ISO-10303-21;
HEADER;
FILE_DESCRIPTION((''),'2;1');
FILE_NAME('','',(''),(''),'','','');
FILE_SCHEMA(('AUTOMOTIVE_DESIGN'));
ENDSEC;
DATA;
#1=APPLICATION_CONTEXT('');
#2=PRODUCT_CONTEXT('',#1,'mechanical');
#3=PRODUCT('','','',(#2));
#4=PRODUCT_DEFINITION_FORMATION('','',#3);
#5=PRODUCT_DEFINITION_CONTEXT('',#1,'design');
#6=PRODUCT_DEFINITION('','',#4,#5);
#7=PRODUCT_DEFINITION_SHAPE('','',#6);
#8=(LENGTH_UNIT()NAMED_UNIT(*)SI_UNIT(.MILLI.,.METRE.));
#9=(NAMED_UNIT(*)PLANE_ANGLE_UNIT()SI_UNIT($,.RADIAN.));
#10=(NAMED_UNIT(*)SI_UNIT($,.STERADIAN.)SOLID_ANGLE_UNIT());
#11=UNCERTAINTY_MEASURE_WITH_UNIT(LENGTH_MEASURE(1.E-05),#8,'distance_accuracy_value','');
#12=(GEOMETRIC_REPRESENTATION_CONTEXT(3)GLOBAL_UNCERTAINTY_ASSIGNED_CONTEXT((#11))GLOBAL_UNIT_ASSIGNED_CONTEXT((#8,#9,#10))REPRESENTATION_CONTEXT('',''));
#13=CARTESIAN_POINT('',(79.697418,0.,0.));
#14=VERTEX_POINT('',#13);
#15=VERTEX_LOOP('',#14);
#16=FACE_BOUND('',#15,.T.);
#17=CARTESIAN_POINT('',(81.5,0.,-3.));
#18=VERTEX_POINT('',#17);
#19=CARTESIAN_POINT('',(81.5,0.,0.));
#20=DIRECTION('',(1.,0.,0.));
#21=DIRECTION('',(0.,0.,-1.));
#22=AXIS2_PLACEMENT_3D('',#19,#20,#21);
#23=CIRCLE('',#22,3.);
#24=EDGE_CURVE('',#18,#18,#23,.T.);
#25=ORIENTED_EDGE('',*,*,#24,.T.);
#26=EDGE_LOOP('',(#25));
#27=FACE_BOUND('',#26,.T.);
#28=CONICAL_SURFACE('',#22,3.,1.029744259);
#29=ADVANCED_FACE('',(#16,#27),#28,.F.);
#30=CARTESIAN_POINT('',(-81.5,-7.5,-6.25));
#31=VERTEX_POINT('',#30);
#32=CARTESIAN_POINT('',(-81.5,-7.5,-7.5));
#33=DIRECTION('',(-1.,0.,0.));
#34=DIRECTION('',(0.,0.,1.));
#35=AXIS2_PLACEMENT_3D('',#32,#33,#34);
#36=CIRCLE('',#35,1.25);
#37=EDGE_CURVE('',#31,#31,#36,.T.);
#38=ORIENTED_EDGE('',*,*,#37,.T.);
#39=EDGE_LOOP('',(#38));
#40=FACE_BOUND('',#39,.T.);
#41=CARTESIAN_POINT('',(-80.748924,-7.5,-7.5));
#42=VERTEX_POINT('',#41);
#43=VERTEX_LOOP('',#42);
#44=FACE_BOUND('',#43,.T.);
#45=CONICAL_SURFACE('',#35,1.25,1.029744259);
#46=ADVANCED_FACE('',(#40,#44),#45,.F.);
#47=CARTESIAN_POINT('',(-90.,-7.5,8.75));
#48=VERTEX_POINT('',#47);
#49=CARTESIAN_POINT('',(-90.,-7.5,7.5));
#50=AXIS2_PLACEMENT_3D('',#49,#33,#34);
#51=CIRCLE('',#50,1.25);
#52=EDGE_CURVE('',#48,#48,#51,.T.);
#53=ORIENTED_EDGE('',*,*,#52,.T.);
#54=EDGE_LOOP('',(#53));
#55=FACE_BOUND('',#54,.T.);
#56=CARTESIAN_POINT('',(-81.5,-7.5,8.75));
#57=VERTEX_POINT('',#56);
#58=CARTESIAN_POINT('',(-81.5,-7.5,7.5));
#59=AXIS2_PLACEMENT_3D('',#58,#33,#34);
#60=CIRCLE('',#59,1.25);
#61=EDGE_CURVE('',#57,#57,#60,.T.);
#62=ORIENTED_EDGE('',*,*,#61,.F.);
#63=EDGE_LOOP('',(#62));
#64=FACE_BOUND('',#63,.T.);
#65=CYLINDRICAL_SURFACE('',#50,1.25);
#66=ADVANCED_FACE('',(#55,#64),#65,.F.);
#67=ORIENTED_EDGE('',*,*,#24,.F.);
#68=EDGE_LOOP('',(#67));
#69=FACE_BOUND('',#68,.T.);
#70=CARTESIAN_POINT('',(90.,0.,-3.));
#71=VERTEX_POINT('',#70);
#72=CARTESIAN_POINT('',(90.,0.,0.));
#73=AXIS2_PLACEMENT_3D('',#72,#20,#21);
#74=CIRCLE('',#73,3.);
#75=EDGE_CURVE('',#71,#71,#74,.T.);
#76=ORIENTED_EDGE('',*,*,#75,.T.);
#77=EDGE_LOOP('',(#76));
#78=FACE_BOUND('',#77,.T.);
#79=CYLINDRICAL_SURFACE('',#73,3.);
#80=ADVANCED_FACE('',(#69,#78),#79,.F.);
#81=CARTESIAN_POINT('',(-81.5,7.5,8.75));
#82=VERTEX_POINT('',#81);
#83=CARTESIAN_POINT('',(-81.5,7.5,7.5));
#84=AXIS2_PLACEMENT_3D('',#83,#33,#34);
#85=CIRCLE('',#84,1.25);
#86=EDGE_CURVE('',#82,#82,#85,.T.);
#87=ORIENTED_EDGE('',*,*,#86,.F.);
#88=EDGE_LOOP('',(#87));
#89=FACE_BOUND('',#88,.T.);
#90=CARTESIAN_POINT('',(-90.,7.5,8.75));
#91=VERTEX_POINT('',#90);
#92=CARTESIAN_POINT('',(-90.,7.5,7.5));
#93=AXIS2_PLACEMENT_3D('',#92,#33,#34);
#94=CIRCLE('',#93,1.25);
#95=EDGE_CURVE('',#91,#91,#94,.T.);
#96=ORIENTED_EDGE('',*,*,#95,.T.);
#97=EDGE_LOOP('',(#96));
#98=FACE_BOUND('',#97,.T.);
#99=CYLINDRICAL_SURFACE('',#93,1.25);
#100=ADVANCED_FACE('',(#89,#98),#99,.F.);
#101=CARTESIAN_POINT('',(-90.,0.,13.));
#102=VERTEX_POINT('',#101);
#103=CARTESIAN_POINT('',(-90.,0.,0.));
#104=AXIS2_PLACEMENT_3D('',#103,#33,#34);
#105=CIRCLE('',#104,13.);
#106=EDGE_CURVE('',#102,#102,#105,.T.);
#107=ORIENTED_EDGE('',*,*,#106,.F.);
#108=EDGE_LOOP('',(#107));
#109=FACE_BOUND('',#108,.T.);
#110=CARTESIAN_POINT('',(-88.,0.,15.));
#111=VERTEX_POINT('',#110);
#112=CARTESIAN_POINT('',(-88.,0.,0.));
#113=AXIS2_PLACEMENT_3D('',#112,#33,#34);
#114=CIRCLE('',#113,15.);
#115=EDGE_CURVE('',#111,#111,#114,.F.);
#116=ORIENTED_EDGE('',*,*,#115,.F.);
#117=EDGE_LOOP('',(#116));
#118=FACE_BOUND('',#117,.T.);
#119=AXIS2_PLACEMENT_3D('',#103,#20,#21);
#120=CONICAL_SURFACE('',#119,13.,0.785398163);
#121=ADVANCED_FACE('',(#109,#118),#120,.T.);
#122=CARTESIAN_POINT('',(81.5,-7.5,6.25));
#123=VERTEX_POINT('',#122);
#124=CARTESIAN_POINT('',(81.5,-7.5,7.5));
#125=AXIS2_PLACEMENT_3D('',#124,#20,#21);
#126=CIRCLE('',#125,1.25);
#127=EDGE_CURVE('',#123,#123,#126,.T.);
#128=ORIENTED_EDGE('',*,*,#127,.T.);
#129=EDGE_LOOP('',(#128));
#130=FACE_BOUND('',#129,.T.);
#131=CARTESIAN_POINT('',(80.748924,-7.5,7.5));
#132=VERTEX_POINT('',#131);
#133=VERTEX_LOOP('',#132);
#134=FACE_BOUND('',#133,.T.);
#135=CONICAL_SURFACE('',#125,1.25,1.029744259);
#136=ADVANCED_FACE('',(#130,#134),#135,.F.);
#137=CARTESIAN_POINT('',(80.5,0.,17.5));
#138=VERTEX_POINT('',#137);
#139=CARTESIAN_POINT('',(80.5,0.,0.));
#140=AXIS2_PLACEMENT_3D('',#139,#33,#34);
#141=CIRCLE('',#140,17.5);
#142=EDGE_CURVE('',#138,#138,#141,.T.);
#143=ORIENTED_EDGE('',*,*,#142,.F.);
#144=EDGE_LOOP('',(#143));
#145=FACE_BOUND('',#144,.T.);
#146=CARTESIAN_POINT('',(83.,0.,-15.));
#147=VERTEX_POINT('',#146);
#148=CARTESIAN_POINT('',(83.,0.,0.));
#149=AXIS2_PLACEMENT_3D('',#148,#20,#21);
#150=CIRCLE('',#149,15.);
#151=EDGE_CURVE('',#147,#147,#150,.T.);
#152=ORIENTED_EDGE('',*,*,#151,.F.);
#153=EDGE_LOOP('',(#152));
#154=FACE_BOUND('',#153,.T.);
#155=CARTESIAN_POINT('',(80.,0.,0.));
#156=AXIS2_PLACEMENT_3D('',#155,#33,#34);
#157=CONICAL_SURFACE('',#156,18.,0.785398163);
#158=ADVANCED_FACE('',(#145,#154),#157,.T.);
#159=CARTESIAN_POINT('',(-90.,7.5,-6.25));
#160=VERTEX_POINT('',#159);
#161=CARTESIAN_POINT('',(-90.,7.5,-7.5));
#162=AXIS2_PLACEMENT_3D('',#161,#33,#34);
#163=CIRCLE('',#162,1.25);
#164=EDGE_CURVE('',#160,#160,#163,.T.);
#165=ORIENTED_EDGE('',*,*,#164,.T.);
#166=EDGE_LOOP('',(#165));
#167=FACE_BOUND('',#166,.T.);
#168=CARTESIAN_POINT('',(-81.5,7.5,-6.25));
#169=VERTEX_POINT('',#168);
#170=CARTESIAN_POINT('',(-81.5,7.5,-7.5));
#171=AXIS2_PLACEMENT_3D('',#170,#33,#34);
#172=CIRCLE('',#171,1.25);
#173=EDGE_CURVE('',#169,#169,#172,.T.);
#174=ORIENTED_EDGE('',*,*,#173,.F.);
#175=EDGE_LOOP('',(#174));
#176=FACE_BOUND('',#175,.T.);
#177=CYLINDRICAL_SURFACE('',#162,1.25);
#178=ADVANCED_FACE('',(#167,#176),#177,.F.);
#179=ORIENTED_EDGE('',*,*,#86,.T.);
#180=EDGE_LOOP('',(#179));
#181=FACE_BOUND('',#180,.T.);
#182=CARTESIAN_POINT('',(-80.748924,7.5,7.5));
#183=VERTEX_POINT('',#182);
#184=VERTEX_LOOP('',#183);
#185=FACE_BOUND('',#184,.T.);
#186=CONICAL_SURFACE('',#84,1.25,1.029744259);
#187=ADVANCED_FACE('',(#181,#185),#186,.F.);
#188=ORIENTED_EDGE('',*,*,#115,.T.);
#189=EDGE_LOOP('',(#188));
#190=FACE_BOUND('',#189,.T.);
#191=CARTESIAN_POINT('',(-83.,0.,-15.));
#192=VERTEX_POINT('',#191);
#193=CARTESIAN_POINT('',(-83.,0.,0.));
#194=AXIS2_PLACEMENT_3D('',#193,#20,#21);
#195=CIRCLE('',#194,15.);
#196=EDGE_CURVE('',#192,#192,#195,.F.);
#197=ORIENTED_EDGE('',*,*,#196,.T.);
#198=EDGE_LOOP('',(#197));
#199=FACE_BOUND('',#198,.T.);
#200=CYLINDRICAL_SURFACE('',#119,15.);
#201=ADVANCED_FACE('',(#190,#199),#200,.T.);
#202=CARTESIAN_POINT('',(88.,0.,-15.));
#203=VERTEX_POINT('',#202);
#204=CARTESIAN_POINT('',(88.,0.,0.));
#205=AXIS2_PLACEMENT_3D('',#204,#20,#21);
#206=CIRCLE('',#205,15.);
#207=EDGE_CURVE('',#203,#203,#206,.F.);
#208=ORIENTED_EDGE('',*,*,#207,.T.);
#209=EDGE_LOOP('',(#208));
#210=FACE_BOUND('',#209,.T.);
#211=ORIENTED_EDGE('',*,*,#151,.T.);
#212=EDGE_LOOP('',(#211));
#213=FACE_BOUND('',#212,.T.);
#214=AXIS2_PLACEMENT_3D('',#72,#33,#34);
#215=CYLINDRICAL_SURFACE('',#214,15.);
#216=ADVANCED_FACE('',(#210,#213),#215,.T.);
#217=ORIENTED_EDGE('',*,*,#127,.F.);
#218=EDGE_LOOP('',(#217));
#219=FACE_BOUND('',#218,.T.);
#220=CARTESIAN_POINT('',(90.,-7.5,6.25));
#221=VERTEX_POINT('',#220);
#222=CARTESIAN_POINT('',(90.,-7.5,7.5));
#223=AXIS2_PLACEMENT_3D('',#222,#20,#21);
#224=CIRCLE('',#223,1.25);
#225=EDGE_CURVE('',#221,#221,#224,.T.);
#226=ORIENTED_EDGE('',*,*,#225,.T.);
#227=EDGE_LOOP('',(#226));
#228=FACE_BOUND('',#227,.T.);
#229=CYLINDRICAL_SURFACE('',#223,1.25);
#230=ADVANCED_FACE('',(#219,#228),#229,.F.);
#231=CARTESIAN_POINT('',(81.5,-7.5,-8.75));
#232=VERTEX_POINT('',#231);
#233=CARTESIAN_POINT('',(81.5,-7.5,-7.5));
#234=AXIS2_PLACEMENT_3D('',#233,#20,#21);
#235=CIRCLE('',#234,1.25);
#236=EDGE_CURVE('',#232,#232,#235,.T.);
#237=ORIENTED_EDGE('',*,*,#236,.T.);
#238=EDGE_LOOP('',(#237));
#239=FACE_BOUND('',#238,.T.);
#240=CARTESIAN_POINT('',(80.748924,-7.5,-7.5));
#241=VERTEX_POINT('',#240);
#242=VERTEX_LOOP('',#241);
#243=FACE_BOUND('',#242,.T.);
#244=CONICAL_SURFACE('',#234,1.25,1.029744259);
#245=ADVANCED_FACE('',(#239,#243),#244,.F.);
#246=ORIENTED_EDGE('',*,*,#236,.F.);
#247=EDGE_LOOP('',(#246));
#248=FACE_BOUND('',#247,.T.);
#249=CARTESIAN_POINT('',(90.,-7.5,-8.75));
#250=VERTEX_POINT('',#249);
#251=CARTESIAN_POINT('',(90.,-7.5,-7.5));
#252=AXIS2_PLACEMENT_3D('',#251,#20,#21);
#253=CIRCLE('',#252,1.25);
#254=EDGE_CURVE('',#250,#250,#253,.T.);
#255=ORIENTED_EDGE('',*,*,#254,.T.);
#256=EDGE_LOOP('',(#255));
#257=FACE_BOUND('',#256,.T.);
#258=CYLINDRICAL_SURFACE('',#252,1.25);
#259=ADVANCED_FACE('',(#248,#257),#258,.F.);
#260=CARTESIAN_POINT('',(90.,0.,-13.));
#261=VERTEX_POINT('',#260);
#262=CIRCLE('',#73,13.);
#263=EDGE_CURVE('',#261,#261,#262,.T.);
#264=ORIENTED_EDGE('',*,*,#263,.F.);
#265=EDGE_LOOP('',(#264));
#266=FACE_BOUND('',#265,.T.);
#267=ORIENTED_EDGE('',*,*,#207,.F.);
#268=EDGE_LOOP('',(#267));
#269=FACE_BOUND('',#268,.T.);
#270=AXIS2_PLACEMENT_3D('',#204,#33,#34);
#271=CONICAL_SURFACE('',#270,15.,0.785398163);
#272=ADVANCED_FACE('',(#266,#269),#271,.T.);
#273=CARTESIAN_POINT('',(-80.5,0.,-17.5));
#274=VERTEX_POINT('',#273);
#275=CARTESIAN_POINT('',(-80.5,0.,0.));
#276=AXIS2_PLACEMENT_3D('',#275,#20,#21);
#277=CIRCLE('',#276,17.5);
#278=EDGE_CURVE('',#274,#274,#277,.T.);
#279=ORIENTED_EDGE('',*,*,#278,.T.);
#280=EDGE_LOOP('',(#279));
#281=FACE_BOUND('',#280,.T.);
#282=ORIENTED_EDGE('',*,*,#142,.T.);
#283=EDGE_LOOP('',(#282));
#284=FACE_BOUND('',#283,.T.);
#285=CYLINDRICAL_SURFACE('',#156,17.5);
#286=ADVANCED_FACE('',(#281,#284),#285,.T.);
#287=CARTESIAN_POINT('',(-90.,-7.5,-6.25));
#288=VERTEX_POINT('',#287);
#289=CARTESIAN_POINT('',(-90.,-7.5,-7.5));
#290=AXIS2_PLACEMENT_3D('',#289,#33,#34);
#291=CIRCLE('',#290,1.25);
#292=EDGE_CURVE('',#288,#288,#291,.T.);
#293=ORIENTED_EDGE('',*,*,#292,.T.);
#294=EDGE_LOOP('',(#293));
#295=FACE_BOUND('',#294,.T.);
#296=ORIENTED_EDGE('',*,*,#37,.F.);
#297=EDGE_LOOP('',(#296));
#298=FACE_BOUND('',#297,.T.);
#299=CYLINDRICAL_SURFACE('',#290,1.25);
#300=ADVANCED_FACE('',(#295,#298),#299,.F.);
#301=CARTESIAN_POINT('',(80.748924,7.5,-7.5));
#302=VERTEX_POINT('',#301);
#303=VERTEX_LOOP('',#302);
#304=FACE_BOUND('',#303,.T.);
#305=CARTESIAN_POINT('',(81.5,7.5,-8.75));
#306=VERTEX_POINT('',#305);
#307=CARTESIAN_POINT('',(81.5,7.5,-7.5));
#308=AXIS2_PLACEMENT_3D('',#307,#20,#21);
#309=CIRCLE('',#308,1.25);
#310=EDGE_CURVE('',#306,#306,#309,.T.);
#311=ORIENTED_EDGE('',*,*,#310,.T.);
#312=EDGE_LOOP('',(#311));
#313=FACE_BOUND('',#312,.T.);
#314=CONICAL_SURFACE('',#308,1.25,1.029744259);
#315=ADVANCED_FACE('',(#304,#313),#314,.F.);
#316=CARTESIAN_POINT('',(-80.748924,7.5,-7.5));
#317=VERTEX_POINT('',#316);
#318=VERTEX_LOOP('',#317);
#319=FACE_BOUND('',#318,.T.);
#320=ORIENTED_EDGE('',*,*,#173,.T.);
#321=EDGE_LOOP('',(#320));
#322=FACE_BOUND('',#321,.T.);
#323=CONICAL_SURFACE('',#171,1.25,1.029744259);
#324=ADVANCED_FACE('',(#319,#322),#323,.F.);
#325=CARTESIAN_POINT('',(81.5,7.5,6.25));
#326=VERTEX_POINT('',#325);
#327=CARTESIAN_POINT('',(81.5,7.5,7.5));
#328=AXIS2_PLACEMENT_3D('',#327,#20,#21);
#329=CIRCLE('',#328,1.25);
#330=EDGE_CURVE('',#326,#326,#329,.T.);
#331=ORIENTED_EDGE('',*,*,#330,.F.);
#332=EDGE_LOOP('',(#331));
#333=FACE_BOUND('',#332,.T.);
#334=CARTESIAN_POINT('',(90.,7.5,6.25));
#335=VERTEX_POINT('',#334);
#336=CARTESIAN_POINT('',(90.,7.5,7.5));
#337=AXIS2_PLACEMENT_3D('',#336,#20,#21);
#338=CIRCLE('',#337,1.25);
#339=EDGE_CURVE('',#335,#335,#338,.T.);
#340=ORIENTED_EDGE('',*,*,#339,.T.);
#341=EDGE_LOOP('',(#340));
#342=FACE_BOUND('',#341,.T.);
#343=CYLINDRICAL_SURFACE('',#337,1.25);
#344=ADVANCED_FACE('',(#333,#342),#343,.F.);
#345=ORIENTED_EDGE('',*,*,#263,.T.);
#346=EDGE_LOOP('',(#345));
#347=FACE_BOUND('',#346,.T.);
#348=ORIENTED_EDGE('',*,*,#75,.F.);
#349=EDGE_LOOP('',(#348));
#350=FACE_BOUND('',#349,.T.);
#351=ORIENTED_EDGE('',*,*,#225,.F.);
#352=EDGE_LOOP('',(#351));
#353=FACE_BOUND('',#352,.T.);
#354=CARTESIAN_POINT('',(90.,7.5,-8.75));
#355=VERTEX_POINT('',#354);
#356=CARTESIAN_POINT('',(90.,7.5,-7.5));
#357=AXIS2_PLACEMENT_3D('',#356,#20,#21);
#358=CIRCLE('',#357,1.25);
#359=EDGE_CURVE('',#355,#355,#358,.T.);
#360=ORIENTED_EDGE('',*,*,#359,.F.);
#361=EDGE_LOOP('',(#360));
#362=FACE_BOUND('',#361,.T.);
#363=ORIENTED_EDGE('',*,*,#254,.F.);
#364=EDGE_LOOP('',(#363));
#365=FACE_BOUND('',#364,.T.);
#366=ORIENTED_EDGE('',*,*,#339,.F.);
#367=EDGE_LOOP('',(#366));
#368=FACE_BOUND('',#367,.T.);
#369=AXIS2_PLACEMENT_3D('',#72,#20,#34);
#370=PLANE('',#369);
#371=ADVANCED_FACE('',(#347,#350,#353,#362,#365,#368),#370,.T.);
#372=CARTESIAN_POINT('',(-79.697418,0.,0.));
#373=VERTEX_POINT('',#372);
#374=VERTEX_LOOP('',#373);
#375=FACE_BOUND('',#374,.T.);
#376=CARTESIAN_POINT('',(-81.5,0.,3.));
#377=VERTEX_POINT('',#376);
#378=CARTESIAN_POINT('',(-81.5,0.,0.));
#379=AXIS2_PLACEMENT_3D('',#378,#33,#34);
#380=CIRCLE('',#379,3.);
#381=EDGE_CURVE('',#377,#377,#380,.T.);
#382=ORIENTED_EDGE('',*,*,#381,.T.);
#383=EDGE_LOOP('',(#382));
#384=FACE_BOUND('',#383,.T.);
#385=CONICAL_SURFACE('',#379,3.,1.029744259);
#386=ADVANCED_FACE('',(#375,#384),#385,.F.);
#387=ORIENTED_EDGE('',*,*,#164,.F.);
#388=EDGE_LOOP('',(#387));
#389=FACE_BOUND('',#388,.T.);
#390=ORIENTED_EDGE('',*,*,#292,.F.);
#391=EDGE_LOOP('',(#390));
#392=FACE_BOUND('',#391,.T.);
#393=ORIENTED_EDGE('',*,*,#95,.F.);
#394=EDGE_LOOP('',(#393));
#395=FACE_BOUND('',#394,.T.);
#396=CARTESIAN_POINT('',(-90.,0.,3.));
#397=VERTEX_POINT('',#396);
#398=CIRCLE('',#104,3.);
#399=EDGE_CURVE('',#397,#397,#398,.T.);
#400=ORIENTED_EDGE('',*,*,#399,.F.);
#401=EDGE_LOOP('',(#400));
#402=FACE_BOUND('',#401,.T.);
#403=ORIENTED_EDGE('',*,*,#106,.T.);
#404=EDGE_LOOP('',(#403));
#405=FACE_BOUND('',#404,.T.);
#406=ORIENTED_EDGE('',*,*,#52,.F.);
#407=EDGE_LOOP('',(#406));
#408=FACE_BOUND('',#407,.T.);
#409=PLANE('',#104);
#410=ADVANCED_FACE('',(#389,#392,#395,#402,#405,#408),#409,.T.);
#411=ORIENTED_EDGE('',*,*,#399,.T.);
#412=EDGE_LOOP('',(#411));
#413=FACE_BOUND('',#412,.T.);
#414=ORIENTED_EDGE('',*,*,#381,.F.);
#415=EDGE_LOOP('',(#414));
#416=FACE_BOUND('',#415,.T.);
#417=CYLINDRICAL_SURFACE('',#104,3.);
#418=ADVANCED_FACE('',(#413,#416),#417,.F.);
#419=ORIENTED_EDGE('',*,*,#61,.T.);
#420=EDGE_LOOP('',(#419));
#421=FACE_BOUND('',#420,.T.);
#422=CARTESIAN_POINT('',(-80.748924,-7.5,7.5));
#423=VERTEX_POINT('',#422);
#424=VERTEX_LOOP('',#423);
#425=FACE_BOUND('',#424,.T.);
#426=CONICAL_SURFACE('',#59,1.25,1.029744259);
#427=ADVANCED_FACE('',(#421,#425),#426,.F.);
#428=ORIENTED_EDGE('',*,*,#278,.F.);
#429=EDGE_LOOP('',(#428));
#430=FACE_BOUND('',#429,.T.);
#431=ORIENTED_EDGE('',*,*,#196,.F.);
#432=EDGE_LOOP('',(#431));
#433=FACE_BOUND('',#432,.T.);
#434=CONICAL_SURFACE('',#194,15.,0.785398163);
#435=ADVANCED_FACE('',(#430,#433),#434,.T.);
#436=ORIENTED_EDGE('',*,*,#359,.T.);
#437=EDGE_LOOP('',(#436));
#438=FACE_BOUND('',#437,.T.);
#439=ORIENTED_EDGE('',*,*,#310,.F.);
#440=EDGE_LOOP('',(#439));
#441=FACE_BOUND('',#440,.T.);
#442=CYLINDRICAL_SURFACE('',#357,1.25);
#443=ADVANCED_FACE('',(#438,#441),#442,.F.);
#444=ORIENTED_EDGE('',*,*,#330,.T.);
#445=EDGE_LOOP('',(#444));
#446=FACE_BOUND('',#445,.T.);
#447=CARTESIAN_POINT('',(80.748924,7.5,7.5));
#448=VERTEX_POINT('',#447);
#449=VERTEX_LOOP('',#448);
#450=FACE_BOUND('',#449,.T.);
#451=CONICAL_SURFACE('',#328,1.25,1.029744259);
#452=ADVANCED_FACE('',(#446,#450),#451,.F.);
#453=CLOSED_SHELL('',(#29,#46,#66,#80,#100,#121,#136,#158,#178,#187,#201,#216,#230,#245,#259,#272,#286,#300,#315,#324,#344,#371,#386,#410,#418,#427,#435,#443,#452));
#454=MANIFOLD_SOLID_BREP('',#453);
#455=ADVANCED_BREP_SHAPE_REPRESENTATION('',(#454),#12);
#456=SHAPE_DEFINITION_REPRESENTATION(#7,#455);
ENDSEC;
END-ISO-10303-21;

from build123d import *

# Parameters (mm, degrees)
SKETCH1_R                  = 17.5
BOSS_EXTRUDE1_DEPTH        = 80
SKETCH7_R                  = 15
BOSS_EXTRUDE2_DEPTH        = 10
CHAMFER1_SIZE              = 3
CHAMFER2_SIZE              = 2
M3_TAPPED_HOLE1_AT_2_COUNT = 2
M3_TAPPED_HOLE1_AT_2_PITCH = 15
M3_TAPPED_HOLE1_AT_3_COUNT = 2
M3_TAPPED_HOLE1_AT_3_PITCH = 21.213203436
M3_TAPPED_HOLE1_AT_4_COUNT = 2
M3_TAPPED_HOLE1_AT_4_PITCH = 15


with BuildPart() as part:
    # Sketch1 → Boss-Extrude1 (new, symmetric)
    with BuildSketch(Plane(origin=(0, 0, 0), x_dir=(0, 0, -1), z_dir=(1, 0, 0))):
        Circle(SKETCH1_R)
    extrude(amount=BOSS_EXTRUDE1_DEPTH, both=True)

    # Sketch7 → Boss-Extrude2 (add)
    with BuildSketch(Plane.ZY.offset(80)):
        Circle(SKETCH7_R)
    boss_extrude2 = extrude(amount=BOSS_EXTRUDE2_DEPTH)

    # Mirror3: Boss-Extrude2 across plane
    add(boss_extrude2.mirror(Plane(origin=(0, 0, 0), x_dir=(0, 0, 1), z_dir=(1, 0, 0))))

    # Chamfer1
    # the kernel refuses this chamfer: 3 mm, written as the material it adds along each edge
    with BuildSketch(Plane(origin=(80, 0, 0), x_dir=(0, 0, 1), z_dir=(0, -1, 0))) as chamfer1_piece_1_section:
        Polygon((15 + CHAMFER1_SIZE, 0), (15, -CHAMFER1_SIZE), (15, 0), align=None)
    chamfer1_piece_1 = revolve(axis=Axis((80, 0, 0), (-1, 0, 0)), mode=Mode.PRIVATE)
    chamfer1_piece_1 = chamfer1_piece_1 & Plane(origin=(81.737216011, 0, 0), x_dir=(0, 0, -1), z_dir=(1, 0, 0)) * Cylinder(17.5, 72, mode=Mode.PRIVATE)
    add(chamfer1_piece_1)
    with BuildSketch(Plane(origin=(-80, 0, 0), x_dir=(0, 0, 1), z_dir=(0, -1, 0))) as chamfer1_piece_2_section:
        Polygon((15 + CHAMFER1_SIZE, 0), (15, CHAMFER1_SIZE), (15, 0), align=None)
    chamfer1_piece_2 = revolve(axis=Axis((-80, 0, 0), (-1, 0, 0)), mode=Mode.PRIVATE)
    chamfer1_piece_2 = chamfer1_piece_2 & Plane(origin=(-81.737216011, 0, 0), x_dir=(0, 0, -1), z_dir=(1, 0, 0)) * Cylinder(17.5, 72, mode=Mode.PRIVATE)
    add(chamfer1_piece_2)

    # Chamfer2
    chamfer2_edges = [part.edges().sort_by_distance(p)[0] for p in [
        (90, 0, -15),
        (-90, 0, -15),
    ]]
    chamfer(chamfer2_edges, length=CHAMFER2_SIZE)

    # Sketch9 → M3 Tapped Hole1 (revolve, cut)
    with BuildSketch(Plane(origin=(-90, 7.5, -7.5), x_dir=(0, 0, 1), z_dir=(0, 1, 0))):
        Polygon((0, 0), (0, 9.251075774), (1.25, 8.5), (1.25, 0), align=None)
    m3_tapped_hole1 = revolve(axis=Axis((-96.35, 7.5, -7.5), (1, 0, 0)), mode=Mode.SUBTRACT)

    # M3 Tapped Hole1 at 2: M3 Tapped Hole1 ×2
    with Locations(*[(0, 0, i * M3_TAPPED_HOLE1_AT_2_PITCH) for i in range(1, M3_TAPPED_HOLE1_AT_2_COUNT)]):
        add(m3_tapped_hole1, mode=Mode.SUBTRACT)

    # M3 Tapped Hole1 at 3: M3 Tapped Hole1 ×2
    with Locations(*[Vector(0, -0.7071067811865476, 0.7071067811865475) * (i * M3_TAPPED_HOLE1_AT_3_PITCH) for i in range(1, M3_TAPPED_HOLE1_AT_3_COUNT)]):
        add(m3_tapped_hole1, mode=Mode.SUBTRACT)

    # M3 Tapped Hole1 at 4: M3 Tapped Hole1 ×2
    with Locations(*[(0, -i * M3_TAPPED_HOLE1_AT_4_PITCH, 0) for i in range(1, M3_TAPPED_HOLE1_AT_4_COUNT)]):
        add(m3_tapped_hole1, mode=Mode.SUBTRACT)

    # Sketch11 → Ø6.0mm Dowel Hole1 (revolve, cut)
    with BuildSketch(Plane(origin=(-90, 0, 0), x_dir=(0, 0, 1), z_dir=(0, 1, 0))):
        Polygon((0, 0), (0, 10.302581857), (3, 8.5), (3, 0), align=None)
    f_6_0mm_dowel_hole1 = revolve(axis=Axis((-96.35, 0, 0), (1, 0, 0)), mode=Mode.SUBTRACT)

    # Mirror4: M3 Tapped Hole1, Ø6.0mm Dowel Hole1 across plane
    add(m3_tapped_hole1.mirror(Plane(origin=(0, 0, 0), x_dir=(0, 0, 1), z_dir=(1, 0, 0))), mode=Mode.SUBTRACT)
    add(f_6_0mm_dowel_hole1.mirror(Plane(origin=(0, 0, 0), x_dir=(0, 0, 1), z_dir=(1, 0, 0))), mode=Mode.SUBTRACT)

    # Mirror4 copy 1 sketch → Mirror4 copy 1 (revolve, cut)
    with BuildSketch(Plane(origin=(90, 7.5, 7.5), x_dir=(0, 0, 1), z_dir=(0, 1, 0))):
        Polygon((0, 0), (0, -9.251075774), (1.25, -8.5), (1.25, 0), align=None)
    revolve(axis=Axis((96.35, 7.5, 7.5), (1, 0, 0)), mode=Mode.SUBTRACT)

    # Mirror4 copy 2 sketch → Mirror4 copy 2 (revolve, cut)
    with BuildSketch(Plane(origin=(90, -7.5, 7.5), x_dir=(0, 0, 1), z_dir=(0, 1, 0))):
        Polygon((0, 0), (0, -9.251075774), (1.25, -8.5), (1.25, 0), align=None)
    revolve(axis=Axis((96.35, -7.5, 7.5), (1, 0, 0)), mode=Mode.SUBTRACT)

    # Mirror4 copy 3 sketch → Mirror4 copy 3 (revolve, cut)
    with BuildSketch(Plane(origin=(90, -7.5, -7.5), x_dir=(0, 0, 1), z_dir=(0, 1, 0))):
        Polygon((0, 0), (0, -9.251075774), (1.25, -8.5), (1.25, 0), align=None)
    revolve(axis=Axis((96.35, -7.5, -7.5), (1, 0, 0)), mode=Mode.SUBTRACT)


solid = part.part
